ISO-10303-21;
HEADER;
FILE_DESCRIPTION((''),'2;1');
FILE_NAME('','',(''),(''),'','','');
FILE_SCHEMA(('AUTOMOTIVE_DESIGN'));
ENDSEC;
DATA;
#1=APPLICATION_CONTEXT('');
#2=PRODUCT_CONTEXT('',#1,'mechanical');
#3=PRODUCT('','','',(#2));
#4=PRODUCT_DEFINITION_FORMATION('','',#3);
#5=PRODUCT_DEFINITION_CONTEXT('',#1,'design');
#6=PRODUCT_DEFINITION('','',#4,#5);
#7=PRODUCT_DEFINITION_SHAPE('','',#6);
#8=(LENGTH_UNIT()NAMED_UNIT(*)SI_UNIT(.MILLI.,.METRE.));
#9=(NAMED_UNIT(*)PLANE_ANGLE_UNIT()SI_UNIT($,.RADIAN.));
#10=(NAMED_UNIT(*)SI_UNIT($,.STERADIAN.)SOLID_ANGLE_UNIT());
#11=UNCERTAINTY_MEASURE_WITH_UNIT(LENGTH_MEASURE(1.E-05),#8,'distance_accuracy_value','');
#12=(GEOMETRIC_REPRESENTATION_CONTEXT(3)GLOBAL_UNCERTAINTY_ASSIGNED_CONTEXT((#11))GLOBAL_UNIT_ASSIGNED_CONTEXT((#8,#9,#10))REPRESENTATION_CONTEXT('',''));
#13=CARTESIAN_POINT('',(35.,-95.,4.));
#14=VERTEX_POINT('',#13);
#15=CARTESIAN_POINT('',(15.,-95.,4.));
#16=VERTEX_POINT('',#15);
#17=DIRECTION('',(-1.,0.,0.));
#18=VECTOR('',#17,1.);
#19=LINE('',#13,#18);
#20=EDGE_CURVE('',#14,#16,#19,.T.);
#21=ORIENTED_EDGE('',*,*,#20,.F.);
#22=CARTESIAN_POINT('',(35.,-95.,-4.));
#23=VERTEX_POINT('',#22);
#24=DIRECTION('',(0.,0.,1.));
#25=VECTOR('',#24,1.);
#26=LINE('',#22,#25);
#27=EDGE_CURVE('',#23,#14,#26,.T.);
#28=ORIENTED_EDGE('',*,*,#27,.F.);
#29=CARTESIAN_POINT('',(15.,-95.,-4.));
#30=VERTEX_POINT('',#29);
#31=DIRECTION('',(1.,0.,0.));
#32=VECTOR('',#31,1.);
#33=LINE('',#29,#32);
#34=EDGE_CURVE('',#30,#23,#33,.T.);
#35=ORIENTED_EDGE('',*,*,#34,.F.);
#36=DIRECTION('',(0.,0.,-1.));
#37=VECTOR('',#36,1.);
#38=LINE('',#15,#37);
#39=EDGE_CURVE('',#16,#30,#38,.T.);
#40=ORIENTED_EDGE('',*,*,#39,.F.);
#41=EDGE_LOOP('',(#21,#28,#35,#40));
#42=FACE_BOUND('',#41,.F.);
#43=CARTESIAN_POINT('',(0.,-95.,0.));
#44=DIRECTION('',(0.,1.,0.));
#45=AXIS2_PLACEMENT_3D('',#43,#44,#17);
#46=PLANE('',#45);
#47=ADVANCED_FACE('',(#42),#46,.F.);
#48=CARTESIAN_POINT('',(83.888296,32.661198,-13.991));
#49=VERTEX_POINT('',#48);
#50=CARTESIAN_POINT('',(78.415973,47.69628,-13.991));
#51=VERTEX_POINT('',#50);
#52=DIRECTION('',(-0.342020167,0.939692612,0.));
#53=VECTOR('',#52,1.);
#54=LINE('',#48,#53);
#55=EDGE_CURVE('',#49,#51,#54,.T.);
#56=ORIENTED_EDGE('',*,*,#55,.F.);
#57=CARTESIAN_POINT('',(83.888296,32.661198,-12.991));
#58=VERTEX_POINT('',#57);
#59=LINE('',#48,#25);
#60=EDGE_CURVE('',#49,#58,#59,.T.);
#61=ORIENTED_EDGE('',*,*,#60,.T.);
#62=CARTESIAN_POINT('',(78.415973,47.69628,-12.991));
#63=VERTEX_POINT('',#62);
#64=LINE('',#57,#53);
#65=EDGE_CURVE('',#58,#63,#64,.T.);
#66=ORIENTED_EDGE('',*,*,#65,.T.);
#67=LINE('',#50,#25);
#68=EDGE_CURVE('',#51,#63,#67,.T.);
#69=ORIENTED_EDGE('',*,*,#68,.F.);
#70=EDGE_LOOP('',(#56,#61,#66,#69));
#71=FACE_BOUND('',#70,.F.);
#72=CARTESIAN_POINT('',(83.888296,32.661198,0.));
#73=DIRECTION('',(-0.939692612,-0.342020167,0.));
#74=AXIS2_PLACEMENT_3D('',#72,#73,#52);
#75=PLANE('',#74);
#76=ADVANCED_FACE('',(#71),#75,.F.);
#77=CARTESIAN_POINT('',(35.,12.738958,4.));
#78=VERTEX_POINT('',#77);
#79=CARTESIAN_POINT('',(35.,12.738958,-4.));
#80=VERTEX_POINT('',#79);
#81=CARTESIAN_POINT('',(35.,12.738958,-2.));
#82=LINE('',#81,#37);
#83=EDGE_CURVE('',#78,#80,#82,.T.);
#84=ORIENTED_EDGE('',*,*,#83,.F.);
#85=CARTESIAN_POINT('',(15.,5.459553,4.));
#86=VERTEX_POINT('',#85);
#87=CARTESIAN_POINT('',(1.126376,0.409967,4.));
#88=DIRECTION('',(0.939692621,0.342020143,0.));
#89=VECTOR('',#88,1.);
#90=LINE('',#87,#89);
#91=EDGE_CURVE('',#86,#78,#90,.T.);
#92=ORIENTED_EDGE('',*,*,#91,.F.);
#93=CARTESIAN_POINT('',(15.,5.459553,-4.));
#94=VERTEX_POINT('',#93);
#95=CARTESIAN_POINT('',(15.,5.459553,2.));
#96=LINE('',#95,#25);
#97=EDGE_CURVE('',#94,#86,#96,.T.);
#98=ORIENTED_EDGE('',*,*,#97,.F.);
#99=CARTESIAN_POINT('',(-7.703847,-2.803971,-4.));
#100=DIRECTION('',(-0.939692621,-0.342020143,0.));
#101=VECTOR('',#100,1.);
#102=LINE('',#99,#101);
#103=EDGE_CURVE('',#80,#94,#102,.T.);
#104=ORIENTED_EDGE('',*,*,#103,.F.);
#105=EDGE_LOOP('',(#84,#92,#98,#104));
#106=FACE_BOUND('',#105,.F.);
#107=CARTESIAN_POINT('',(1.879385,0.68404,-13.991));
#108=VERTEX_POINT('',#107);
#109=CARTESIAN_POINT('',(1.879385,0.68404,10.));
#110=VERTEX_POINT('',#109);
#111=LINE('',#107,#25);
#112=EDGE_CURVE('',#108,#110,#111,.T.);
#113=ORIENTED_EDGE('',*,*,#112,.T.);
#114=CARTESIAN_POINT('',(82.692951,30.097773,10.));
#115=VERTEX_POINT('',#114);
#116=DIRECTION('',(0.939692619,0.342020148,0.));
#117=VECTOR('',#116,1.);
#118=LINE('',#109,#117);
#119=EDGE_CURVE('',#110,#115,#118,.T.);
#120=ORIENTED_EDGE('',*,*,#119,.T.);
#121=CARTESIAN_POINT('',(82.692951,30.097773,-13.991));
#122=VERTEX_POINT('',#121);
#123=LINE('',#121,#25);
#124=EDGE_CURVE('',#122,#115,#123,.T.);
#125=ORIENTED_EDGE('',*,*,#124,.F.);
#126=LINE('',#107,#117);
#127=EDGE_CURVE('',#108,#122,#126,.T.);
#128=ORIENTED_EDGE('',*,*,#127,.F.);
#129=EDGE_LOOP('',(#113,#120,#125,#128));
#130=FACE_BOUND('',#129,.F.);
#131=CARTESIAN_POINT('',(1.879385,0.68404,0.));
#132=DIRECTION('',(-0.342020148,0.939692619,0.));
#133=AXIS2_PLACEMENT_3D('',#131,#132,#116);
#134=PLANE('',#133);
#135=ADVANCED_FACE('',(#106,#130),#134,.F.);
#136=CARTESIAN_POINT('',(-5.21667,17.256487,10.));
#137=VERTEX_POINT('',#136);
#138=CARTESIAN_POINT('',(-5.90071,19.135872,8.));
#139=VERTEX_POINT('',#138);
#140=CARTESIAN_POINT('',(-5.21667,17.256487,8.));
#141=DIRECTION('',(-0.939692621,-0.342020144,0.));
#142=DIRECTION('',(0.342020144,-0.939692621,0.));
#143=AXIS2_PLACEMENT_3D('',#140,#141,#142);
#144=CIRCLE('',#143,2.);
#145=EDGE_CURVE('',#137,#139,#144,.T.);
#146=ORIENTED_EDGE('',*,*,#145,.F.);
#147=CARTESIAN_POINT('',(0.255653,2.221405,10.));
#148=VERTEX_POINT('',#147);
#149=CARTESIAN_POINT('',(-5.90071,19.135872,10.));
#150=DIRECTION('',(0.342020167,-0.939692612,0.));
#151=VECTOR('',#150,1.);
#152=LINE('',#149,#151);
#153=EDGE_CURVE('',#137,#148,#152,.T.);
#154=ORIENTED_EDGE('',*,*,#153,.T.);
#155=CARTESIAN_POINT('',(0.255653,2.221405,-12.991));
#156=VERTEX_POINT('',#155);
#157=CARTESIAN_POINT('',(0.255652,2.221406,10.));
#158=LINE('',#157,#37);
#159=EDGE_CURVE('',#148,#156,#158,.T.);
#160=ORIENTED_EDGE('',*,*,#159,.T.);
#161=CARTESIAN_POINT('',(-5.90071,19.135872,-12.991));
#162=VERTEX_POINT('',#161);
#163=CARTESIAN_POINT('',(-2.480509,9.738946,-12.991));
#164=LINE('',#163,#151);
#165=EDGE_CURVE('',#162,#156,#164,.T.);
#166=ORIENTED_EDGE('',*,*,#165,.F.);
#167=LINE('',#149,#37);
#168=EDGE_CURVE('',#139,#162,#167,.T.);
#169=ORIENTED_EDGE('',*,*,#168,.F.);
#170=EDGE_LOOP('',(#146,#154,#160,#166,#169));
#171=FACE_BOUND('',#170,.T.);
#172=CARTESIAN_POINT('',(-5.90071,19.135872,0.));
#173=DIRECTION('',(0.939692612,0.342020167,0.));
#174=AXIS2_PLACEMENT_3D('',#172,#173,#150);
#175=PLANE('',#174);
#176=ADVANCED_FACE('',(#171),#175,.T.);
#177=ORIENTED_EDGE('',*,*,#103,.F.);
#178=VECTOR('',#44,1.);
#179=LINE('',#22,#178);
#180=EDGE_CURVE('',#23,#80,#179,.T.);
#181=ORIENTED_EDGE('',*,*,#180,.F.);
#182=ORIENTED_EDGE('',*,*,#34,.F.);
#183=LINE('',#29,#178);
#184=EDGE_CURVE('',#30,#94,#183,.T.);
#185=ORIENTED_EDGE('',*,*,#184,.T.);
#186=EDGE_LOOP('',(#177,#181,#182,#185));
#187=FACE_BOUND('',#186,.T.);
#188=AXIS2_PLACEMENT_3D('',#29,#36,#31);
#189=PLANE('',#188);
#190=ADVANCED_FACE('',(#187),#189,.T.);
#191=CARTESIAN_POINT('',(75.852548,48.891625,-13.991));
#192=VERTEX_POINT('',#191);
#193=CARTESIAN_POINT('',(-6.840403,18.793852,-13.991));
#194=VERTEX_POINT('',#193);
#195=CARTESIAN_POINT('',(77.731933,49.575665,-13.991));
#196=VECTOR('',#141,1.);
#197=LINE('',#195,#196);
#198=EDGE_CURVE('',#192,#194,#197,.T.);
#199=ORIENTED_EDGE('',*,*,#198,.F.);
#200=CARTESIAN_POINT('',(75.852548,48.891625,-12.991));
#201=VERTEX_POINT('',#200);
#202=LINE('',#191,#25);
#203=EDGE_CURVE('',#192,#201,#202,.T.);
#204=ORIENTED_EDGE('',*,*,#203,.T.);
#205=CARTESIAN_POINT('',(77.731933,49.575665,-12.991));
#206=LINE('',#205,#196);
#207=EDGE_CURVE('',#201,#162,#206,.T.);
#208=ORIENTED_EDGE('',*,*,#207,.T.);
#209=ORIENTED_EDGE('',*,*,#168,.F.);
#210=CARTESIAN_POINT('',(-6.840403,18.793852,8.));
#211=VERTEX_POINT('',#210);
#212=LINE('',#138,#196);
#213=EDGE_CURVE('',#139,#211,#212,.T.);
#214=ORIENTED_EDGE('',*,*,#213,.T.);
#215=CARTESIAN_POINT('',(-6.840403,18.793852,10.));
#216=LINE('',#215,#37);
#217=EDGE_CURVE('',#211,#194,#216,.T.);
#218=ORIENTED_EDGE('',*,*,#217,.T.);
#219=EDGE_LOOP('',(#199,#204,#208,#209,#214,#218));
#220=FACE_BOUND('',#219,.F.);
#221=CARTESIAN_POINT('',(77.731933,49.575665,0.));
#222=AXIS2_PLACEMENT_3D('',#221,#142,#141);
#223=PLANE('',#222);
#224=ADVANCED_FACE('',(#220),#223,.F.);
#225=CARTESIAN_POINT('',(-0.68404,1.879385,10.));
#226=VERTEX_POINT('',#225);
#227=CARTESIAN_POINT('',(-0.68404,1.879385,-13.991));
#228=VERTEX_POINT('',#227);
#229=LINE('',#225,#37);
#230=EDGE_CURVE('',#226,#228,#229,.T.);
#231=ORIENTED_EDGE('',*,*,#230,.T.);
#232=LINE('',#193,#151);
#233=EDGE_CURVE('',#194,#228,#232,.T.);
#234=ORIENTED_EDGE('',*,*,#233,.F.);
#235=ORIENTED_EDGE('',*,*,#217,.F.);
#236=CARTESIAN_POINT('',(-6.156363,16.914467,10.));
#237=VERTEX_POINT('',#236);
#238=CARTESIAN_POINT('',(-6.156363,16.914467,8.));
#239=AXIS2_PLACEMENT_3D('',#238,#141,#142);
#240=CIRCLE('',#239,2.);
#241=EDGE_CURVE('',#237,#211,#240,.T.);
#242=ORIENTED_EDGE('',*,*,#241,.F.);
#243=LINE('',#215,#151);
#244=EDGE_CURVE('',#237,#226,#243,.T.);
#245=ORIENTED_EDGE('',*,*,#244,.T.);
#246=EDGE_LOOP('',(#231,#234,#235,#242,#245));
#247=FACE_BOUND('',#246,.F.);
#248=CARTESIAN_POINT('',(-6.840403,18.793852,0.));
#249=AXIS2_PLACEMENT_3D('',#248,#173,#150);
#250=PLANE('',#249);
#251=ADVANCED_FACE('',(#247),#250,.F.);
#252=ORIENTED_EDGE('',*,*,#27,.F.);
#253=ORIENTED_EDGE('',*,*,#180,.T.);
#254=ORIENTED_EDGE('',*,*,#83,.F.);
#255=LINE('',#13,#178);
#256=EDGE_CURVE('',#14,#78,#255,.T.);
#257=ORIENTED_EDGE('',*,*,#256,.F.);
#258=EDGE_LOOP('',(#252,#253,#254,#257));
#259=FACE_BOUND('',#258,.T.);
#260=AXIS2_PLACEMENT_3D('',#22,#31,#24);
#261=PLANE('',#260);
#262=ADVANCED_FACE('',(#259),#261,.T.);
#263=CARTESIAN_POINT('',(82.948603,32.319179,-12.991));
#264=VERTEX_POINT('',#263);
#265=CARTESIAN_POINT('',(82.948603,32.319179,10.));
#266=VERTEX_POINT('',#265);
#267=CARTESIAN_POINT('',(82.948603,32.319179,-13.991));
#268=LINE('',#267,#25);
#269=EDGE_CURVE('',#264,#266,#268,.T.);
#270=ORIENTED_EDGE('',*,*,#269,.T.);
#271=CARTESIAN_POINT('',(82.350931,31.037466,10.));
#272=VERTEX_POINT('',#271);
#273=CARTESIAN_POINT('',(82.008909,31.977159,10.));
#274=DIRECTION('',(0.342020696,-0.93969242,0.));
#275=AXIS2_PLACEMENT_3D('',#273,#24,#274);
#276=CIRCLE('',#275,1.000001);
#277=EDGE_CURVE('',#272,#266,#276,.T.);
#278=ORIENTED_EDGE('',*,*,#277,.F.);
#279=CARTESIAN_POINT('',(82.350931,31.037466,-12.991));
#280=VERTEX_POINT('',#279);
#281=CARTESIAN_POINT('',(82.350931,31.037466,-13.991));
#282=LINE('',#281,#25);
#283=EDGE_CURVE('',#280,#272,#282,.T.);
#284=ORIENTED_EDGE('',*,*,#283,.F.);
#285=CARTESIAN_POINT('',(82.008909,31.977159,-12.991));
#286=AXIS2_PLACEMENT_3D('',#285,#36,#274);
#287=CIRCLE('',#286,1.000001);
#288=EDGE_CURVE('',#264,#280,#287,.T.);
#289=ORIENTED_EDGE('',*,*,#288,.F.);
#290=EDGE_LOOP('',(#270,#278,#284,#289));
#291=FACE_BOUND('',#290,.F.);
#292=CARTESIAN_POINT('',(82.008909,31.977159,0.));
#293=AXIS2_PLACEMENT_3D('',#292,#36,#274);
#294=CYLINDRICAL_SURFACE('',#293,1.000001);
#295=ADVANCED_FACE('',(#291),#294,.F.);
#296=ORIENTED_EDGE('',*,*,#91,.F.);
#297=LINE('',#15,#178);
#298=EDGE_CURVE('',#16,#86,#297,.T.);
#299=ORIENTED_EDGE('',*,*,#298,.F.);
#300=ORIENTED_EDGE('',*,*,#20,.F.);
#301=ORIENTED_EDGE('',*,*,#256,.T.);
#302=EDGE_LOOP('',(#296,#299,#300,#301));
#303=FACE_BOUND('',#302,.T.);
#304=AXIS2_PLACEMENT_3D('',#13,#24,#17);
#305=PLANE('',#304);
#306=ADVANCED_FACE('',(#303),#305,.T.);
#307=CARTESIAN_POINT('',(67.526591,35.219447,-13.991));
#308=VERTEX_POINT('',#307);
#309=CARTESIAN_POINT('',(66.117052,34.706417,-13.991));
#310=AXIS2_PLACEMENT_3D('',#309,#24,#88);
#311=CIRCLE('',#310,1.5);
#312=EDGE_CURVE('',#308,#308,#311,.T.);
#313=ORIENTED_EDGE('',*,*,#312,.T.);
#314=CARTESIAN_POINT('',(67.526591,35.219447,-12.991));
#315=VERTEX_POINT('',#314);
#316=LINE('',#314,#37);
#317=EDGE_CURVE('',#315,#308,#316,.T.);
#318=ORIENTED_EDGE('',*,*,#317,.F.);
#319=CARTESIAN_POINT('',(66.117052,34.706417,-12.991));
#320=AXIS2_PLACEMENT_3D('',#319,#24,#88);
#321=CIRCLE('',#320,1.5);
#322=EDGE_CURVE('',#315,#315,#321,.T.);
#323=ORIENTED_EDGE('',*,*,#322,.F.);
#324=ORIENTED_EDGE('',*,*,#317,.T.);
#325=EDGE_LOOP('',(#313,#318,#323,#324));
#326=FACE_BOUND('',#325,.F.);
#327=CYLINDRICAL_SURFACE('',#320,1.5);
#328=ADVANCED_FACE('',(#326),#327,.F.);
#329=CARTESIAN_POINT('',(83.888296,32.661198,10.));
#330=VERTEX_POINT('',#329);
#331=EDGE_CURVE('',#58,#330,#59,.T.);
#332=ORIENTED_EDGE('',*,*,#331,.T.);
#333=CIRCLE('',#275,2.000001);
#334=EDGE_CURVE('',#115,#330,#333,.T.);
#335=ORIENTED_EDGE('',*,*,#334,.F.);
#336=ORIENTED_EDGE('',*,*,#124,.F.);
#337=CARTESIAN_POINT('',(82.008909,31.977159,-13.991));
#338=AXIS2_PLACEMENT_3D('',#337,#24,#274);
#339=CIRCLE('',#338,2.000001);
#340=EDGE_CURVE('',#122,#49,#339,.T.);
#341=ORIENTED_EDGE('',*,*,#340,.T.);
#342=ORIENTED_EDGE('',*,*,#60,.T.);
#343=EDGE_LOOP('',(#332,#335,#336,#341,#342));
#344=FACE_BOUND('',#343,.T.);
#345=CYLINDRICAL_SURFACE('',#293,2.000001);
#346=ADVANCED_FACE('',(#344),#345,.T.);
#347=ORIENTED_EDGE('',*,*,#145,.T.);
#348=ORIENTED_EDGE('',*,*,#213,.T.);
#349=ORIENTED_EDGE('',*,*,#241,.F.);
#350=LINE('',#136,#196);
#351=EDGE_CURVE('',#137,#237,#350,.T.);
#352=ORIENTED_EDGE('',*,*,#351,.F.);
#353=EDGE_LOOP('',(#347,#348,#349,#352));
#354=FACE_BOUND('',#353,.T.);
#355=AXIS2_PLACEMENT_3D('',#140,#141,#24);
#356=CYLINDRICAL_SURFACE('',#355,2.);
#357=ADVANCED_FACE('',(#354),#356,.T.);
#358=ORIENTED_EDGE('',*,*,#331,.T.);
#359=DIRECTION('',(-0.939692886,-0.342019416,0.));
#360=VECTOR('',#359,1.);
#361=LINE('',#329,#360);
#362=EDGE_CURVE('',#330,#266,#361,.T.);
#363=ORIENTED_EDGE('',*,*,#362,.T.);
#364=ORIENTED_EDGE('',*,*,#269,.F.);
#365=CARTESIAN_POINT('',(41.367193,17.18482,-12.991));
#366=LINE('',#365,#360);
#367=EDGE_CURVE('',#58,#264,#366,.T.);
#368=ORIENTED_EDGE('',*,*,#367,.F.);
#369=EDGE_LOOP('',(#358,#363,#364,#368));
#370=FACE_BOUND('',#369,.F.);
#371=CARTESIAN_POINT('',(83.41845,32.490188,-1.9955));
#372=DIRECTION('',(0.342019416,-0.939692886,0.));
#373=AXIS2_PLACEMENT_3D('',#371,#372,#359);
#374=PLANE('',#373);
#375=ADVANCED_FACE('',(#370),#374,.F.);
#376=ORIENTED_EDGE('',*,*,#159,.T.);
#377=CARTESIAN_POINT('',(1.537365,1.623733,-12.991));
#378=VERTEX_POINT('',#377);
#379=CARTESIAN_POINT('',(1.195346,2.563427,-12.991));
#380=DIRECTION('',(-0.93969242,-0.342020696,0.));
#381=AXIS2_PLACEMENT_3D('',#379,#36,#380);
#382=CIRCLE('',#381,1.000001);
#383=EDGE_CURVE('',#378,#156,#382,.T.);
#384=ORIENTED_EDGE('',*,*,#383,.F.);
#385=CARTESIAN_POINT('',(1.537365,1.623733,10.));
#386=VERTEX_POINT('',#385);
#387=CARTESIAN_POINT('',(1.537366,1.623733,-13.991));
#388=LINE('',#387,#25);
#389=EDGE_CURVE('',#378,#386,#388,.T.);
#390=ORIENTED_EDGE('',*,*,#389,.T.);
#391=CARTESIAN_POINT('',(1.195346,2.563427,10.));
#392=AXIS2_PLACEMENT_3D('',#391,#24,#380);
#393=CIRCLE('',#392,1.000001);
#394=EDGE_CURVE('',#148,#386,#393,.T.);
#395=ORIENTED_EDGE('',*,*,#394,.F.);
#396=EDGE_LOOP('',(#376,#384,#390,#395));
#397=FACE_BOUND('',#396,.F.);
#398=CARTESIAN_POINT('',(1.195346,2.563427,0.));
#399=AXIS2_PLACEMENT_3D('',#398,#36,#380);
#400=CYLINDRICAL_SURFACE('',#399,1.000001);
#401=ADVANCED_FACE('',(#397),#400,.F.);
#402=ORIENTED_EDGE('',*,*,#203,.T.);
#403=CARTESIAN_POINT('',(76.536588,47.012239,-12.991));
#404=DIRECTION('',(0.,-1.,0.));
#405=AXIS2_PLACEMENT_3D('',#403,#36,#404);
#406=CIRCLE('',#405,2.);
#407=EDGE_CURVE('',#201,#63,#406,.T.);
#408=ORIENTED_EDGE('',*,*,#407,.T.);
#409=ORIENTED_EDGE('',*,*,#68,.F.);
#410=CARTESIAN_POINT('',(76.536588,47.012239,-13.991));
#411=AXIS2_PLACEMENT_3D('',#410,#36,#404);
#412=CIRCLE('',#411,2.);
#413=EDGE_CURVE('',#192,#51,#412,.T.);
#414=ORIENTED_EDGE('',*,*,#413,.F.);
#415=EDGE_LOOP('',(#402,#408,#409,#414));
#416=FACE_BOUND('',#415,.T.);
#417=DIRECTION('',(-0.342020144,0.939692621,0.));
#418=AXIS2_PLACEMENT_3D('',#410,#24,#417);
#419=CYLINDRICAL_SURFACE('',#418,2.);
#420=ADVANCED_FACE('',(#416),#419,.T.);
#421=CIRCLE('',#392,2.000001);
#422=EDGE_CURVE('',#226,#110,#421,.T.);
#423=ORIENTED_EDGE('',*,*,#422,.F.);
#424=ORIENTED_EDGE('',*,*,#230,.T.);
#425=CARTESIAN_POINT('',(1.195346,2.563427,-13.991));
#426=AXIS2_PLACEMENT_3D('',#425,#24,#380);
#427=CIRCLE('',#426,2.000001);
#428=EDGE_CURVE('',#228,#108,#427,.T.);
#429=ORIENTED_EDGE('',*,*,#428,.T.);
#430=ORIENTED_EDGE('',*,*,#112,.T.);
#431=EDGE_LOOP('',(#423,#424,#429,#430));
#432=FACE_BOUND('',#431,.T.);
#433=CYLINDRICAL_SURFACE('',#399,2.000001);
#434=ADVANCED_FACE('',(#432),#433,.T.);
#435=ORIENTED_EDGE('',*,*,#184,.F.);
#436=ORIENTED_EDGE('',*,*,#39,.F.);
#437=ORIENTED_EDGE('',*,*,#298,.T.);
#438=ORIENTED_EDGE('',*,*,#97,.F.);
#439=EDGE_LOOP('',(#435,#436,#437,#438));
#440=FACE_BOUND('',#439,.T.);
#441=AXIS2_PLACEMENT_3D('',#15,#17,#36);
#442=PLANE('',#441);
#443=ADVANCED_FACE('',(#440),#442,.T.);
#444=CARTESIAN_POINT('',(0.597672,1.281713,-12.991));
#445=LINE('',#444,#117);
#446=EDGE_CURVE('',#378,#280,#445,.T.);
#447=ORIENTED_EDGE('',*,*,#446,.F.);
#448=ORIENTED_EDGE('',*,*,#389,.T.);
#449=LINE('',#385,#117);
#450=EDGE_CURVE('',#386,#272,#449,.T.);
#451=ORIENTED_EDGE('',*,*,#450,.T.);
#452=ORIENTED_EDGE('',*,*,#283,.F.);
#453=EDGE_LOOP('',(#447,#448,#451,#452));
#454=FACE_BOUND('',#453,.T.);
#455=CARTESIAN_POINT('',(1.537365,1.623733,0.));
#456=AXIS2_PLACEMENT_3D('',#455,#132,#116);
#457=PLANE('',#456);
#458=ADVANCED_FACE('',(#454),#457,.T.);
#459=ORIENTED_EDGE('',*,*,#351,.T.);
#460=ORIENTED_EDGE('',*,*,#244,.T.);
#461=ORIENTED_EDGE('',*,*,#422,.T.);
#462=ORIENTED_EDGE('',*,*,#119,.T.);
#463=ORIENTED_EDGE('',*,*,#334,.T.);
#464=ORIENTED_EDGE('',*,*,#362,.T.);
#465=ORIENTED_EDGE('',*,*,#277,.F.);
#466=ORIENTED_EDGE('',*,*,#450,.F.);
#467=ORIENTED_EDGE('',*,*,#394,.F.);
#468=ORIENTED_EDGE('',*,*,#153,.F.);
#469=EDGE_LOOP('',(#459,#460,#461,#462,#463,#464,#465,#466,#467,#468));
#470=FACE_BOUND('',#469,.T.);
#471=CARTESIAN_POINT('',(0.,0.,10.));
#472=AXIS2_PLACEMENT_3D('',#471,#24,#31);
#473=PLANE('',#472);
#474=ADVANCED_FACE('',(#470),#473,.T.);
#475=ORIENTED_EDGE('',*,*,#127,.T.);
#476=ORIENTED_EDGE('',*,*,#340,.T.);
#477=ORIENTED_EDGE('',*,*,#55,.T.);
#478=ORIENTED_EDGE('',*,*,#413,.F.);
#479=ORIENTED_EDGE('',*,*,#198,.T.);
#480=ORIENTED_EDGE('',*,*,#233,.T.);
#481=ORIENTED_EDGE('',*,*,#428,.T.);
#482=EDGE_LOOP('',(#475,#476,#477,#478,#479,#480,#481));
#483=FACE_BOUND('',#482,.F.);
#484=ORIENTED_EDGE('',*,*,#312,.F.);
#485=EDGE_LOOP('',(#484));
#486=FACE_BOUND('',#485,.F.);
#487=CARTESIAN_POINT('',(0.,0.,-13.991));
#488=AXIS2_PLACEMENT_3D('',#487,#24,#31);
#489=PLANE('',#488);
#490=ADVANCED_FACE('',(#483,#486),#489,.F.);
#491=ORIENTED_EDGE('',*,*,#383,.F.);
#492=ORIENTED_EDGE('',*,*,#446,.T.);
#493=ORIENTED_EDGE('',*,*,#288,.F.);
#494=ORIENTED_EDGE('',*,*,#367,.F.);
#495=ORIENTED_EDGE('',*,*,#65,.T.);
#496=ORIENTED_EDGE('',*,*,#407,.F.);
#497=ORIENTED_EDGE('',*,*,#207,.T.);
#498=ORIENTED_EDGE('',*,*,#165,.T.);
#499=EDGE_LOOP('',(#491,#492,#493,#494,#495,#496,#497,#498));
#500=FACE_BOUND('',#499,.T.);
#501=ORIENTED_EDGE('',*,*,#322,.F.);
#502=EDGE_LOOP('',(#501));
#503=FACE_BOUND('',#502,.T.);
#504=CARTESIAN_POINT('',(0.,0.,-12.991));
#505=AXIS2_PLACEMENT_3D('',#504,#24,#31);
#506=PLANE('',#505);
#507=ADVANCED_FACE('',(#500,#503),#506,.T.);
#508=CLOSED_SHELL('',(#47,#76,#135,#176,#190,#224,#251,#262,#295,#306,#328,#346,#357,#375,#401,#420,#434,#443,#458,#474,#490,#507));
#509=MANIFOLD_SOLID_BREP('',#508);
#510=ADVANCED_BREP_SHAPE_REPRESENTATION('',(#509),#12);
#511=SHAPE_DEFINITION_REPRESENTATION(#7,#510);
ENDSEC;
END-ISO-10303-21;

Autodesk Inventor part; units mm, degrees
ref_plane "YZ Plane" through (0, 0, 0) normal (1, 0, 0) x (0, 1, 0)
ref_plane "XY Plane" through (0, 0, 0) normal (0, 0, 1) x (1, 0, 0)
sketch "Sketch1" plane through (0, 0, 0) normal (0, 0, 1) x (1, 0, 0)
  line L0 (1.879385, 0.68404) -> (82.692951, 30.097773)
  line L1 (0, 0) -> (86, 0) construction
  line L2 (83.888296, 32.661198) -> (77.731933, 49.575665)
  line L3 (77.731933, 49.575665) -> (-6.840403, 18.793852)
  line L4 (-6.840403, 18.793852) -> (-0.68404, 1.879385)
  arc A0 (-0.68404, 1.879385) -> (1.879385, 0.68404) centre (1.195345, 2.563426) ccw
  arc A1 (82.692951, 30.097773) -> (83.888296, 32.661198) centre (82.00891, 31.977158) ccw
  point P0 (84.572336, 30.781813)
  dimension "d0" = 90
  dimension "d1" = 20
  dimension "d2" = 20
  dimension "d9" = 2
extrude "Extrusion1" add sketch "Sketch1" along normal blind 10 and the other way blind 13.991
shell "Shell1" thickness 1 removed faces 3 at (49.541154, 39.315061, -5.994) at (81.836175, 38.299354, 2.003) at (24.256972, 23.017853, 10)
fillet "Fillet1" radius 2 2 edges at (-6.3706, 18.9649, 10) (77.7319, 49.5757, -13.491)
sketch "Sketch2" plane through (1.537365, 1.623733, -12.991) normal (0, 0, 1) x (0.9396926, 0.3420201, 0)
  point P0 (-2, -1)
sketch "Sketch3" plane through (1.537365, 1.623733, -12.991) normal (0, 0, 1) x (0.9396926, 0.3420201, 0)
  circle A0 centre (72, 9) radius 1.5
  line L0 (88, 17) -> (88, 1) projected
  line L1 (86, 0) -> (0, 0) projected
  point P0 (-2, -1)
  dimension "d10" = 3
  dimension "d11" = 16
  dimension "d12" = 9
extrude "Extrusion2" cut sketch "Sketch3" against normal through all
ref_plane "Work Plane1" through (0, -95, 0) normal (0, 1, 0) x (-1, 0, 0)
sketch "Sketch4" plane through (0, -95, 0) normal (0, 1, 0) x (-1, 0, 0)
  line L0 (-15, -4) -> (-35, -4)
  line L1 (-35, -4) -> (-35, 4)
  line L2 (-35, 4) -> (-15, 4)
  line L3 (-15, 4) -> (-15, -4)
  point P0 (0, 0)
  point P1 (-25, 4)
  point P2 (-25, -4)
  dimension "d16" = 20
  dimension "d17" = 8
  dimension "d18" = 25
  dimension "d19" = 4
extrude "Extrusion3" add sketch "Sketch4" along normal up to surface surface through (1.879385, 0.68404, 0) normal (0.3420201, -0.9396926, 0)
properties part number "shooter base_3DPrint"
